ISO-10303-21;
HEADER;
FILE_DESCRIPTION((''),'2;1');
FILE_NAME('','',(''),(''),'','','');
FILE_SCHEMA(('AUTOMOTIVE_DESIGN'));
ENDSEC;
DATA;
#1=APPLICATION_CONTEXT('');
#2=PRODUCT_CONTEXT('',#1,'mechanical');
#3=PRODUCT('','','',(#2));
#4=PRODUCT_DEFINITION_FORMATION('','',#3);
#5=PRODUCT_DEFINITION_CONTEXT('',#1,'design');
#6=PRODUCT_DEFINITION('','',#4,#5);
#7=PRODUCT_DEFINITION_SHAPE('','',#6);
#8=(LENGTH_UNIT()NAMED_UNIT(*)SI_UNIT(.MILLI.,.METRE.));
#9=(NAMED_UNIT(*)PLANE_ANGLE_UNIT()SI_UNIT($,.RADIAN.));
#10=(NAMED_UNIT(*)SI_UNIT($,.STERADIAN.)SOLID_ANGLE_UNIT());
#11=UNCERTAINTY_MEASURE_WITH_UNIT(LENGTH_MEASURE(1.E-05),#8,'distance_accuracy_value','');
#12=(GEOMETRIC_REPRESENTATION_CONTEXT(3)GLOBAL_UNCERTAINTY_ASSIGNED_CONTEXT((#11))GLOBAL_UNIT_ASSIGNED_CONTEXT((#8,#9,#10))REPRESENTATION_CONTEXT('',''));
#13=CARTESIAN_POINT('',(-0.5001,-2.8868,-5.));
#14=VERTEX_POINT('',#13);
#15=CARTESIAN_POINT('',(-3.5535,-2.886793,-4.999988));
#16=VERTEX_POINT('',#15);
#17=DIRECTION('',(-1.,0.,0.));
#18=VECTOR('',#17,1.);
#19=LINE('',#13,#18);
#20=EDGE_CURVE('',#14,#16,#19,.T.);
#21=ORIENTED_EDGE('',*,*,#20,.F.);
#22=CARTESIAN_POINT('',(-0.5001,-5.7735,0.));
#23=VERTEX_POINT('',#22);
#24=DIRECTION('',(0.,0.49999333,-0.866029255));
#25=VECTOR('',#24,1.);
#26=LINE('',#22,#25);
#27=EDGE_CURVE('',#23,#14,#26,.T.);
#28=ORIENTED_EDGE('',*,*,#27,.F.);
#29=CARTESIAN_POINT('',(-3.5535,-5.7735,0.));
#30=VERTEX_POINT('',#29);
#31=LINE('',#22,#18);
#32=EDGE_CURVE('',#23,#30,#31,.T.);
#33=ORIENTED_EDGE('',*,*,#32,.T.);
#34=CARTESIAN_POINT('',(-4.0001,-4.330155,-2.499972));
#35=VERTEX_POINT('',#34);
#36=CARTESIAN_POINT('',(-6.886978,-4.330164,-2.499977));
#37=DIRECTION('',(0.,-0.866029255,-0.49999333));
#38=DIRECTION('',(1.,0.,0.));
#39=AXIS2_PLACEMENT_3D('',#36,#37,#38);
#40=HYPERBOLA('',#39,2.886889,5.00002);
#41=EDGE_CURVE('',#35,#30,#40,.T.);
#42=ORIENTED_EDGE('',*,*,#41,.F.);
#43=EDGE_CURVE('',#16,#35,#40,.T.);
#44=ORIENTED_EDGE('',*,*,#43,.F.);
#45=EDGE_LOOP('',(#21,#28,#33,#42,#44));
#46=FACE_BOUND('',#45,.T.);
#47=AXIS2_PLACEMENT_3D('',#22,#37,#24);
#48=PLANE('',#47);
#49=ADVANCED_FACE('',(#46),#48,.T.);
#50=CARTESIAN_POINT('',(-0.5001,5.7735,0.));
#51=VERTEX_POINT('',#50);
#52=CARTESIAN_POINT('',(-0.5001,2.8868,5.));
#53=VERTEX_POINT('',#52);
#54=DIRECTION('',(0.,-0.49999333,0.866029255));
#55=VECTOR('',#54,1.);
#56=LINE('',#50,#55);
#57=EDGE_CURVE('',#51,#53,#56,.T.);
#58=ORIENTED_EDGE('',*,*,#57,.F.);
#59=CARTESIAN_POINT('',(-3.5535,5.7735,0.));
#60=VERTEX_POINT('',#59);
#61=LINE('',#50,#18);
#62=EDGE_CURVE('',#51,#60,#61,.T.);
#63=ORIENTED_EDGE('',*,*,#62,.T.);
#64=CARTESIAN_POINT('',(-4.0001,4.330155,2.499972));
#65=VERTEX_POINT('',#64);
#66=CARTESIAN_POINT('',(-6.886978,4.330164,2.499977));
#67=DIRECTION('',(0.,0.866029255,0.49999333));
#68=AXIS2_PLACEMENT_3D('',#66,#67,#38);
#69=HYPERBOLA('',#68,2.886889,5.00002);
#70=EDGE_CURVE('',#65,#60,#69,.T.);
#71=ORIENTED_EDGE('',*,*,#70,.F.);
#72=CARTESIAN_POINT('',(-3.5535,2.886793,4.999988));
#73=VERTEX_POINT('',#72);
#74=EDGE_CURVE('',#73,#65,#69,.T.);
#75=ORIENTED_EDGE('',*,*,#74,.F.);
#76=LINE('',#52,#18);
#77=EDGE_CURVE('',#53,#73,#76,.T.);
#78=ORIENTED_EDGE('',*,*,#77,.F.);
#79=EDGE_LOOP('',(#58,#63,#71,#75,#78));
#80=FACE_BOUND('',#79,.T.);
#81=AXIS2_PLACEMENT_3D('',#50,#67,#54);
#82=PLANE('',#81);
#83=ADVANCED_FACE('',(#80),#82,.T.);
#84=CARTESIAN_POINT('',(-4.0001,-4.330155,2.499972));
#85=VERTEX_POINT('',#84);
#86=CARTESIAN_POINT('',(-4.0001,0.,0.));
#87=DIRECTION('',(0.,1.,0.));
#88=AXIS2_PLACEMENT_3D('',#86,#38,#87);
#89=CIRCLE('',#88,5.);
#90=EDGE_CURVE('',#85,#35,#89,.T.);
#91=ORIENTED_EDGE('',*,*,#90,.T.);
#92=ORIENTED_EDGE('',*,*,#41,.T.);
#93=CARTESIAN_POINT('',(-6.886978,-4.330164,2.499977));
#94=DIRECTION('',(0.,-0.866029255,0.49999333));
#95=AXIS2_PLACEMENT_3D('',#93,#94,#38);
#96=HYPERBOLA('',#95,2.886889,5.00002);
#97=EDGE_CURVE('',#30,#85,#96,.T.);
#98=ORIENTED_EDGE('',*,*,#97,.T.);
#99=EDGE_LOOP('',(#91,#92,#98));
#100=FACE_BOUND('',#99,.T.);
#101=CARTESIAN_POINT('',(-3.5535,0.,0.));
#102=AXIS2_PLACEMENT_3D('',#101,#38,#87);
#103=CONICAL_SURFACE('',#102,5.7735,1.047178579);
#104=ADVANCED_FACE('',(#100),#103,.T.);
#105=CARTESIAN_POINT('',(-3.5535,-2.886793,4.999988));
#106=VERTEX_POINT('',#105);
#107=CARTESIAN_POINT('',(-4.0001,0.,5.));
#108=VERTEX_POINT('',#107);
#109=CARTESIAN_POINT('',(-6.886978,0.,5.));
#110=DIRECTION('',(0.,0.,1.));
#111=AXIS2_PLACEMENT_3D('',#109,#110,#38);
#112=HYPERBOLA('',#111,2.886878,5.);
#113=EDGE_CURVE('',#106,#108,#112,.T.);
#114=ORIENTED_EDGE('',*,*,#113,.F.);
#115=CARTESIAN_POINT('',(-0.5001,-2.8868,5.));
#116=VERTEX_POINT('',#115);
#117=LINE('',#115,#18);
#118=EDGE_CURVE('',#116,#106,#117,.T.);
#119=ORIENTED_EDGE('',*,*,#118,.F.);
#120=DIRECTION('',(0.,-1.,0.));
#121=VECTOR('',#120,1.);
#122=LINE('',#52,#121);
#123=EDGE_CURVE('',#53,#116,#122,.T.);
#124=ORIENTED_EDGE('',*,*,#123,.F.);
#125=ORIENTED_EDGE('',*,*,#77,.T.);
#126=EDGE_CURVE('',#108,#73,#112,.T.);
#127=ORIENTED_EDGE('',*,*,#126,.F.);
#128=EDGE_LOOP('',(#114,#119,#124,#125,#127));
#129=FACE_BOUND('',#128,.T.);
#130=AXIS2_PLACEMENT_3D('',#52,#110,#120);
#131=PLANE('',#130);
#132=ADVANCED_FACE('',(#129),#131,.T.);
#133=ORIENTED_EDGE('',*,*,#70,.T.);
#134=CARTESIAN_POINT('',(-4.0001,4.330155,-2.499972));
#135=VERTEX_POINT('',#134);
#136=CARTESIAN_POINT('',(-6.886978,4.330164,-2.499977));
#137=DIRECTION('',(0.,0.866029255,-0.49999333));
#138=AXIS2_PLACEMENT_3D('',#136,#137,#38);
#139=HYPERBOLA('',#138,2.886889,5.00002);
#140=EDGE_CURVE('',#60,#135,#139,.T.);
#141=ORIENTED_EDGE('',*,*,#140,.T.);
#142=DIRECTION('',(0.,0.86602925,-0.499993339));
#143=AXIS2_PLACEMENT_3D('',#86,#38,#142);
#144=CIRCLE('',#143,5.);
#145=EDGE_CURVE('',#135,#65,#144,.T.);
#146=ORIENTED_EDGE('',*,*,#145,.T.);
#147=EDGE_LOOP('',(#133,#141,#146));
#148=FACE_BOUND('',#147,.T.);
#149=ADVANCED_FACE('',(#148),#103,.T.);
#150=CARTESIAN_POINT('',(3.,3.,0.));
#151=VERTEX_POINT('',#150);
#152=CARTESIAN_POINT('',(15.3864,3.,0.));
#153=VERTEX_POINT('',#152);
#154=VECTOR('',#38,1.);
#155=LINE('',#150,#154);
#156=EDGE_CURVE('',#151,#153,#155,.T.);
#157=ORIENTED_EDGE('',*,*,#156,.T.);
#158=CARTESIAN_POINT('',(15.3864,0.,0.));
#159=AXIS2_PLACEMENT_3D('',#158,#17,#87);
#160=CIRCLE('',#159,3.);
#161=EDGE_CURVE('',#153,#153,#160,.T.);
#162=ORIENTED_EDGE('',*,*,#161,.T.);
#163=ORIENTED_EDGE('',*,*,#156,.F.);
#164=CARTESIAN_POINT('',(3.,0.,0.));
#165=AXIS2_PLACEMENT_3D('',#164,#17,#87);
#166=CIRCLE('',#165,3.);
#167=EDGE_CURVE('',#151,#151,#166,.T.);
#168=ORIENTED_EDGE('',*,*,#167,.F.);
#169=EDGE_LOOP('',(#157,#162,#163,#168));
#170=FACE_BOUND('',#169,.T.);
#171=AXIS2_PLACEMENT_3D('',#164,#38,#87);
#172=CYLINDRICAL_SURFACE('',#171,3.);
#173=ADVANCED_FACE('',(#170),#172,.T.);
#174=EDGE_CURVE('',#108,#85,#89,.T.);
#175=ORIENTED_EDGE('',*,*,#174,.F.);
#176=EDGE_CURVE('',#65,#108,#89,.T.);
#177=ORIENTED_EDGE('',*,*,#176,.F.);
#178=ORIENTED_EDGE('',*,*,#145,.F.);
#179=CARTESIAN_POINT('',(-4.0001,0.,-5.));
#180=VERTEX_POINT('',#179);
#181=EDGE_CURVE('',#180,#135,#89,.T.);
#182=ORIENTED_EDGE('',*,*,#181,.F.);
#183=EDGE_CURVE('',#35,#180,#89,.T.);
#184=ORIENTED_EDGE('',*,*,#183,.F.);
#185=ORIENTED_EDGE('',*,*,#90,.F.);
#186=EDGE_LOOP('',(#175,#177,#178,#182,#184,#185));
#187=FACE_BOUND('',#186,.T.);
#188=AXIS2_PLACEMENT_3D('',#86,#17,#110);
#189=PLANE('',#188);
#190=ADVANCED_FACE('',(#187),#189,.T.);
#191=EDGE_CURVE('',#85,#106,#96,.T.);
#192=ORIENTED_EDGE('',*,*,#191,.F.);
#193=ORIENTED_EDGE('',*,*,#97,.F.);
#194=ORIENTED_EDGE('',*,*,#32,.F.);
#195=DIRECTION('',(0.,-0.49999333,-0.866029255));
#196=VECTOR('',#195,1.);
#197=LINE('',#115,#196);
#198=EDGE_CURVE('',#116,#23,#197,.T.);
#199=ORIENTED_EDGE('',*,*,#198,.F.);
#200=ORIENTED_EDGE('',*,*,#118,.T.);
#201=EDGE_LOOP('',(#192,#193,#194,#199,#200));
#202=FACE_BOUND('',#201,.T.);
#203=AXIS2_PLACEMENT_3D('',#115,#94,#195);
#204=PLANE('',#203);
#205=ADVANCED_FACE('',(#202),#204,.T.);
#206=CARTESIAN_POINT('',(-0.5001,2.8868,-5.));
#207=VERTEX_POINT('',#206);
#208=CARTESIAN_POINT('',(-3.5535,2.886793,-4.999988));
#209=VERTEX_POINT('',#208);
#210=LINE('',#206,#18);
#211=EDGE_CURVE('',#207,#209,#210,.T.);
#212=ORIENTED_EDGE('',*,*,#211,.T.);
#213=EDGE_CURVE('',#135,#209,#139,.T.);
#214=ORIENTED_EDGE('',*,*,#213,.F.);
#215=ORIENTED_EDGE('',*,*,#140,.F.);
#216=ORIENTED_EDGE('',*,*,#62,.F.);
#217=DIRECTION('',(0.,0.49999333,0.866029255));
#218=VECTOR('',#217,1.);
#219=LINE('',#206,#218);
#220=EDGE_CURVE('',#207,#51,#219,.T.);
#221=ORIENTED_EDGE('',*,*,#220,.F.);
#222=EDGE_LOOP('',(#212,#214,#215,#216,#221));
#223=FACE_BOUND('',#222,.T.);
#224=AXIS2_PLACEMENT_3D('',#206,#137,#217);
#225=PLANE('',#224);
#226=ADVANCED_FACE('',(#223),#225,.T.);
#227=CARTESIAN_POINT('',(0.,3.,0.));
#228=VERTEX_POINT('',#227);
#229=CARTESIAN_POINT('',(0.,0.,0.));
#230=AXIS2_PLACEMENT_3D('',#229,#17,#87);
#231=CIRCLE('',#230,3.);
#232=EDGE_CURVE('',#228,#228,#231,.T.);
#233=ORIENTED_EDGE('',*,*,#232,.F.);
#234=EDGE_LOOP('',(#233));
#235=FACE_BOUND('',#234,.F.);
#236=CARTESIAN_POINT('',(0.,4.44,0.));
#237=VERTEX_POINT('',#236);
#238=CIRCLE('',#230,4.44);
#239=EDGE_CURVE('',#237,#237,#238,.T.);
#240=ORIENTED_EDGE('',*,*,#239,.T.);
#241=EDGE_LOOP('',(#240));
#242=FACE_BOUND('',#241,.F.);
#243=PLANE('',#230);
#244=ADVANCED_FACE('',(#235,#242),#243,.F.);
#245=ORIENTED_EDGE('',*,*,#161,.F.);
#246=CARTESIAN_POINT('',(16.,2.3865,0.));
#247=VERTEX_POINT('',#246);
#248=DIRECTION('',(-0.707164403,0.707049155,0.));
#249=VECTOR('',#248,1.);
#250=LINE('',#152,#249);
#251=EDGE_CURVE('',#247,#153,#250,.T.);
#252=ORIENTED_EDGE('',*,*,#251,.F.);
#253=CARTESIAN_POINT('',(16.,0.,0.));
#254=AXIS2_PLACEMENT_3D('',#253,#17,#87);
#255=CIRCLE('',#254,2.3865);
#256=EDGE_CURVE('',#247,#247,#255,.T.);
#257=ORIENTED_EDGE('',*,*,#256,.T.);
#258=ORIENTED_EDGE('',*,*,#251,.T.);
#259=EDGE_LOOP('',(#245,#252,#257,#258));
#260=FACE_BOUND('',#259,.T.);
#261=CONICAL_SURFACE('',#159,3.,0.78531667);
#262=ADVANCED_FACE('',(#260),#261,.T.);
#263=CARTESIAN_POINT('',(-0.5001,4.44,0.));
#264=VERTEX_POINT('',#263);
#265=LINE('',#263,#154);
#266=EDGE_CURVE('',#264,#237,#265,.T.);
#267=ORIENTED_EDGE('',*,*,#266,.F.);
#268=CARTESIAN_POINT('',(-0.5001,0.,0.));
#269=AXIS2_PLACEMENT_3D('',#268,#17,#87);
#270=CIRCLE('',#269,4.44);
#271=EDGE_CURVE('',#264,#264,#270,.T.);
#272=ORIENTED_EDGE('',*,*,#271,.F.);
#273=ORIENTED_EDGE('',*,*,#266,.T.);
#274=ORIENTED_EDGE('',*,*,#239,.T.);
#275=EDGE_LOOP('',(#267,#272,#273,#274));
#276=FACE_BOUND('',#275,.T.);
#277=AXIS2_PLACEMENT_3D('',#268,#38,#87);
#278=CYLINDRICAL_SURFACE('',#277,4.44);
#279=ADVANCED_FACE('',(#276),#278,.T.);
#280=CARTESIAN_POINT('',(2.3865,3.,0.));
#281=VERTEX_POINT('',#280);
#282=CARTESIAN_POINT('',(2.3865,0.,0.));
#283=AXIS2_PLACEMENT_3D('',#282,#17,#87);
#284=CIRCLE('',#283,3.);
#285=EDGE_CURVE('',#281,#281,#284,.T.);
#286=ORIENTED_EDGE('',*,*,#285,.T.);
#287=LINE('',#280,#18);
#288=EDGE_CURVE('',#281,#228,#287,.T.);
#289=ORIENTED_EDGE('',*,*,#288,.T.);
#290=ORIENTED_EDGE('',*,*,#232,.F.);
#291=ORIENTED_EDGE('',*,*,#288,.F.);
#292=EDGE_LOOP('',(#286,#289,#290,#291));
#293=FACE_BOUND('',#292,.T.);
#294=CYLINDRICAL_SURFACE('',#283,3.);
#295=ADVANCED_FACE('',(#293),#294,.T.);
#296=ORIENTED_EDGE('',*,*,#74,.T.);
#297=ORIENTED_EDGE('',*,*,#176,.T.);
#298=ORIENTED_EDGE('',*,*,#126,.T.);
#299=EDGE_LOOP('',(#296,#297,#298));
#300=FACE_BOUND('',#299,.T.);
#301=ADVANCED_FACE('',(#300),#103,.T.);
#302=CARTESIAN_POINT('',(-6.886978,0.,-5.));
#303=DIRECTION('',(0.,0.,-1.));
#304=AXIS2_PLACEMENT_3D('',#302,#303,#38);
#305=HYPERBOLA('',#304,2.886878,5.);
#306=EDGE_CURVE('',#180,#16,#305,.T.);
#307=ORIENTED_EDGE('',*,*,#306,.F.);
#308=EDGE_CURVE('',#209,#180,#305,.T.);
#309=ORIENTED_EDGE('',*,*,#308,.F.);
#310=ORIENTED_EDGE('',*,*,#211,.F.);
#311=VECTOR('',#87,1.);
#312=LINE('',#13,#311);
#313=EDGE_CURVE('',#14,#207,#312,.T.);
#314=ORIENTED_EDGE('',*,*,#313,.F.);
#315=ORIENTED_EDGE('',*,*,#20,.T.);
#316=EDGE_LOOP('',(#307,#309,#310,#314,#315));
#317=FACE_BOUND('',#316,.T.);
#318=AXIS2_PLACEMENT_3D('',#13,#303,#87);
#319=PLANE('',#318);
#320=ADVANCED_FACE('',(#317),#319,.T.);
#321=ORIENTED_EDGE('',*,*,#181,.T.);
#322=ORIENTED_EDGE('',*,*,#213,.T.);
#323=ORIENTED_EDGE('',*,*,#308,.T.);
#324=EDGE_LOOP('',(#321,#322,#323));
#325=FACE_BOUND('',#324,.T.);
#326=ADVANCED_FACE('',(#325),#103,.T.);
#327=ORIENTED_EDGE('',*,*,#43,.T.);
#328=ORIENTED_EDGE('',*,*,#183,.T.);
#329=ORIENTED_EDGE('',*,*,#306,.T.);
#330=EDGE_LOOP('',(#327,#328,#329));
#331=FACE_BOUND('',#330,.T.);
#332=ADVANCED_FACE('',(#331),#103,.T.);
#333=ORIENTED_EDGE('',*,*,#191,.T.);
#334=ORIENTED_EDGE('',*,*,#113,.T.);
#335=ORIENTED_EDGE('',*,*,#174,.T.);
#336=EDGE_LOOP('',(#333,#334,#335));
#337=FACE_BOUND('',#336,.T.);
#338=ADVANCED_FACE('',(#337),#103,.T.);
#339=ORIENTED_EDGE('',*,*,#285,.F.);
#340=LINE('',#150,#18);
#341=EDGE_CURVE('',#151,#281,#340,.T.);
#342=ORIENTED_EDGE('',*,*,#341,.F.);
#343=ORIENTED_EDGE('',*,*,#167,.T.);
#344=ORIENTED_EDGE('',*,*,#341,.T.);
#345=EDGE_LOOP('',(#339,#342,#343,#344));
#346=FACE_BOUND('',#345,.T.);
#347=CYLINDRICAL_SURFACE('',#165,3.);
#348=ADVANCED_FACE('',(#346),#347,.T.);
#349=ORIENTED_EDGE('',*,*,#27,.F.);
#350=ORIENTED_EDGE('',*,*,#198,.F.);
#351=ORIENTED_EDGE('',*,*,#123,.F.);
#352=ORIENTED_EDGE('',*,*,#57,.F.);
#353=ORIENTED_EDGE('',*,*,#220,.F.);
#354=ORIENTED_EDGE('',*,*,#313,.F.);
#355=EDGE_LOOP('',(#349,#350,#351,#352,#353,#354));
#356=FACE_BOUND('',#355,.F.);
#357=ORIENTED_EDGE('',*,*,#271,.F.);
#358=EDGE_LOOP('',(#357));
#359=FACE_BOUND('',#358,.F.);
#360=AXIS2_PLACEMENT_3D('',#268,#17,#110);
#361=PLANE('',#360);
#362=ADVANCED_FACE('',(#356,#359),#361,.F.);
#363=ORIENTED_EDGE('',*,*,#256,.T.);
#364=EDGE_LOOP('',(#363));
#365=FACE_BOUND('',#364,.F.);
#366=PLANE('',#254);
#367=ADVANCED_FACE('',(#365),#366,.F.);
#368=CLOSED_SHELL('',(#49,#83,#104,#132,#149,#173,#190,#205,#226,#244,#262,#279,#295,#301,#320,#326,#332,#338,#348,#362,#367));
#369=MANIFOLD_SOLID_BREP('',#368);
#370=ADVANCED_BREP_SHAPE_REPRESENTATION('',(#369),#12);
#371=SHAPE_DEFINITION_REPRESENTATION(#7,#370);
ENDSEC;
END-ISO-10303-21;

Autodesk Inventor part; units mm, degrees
ref_plane "YZ Plane" through (0, 0, 0) normal (1, 0, 0) x (0, 1, 0)
ref_plane "XZ Plane" through (0, 0, 0) normal (0, 1, 0) x (-1, 0, 0)
sketch "Skizze1" plane through (0, 0, 0) normal (0, 0, 1) x (1, 0, 0)
  line L0 (0, 4.44) -> (0, 3)
  line L1 (3, 3) -> (16, 3)
  line L2 (16, 3) -> (16, 0)
  line L3 (16, 0) -> (-0.5001, 0)
  line L4 (-3.8001, 0) -> (19.3, 0) projected
  line L5 (-0.5001, 0) -> (-0.5001, 4.44)
  line L6 (-0.5001, 4.44) -> (0, 4.44)
  line L7 (3, 3) -> (2.3865, 3)
  line L8 (2.3865, 3) -> (0, 3)
  line L9 (0, -0.888) -> (0, 5.328) projected
  dimension "d0" = 16
  dimension "d1" = 13
  dimension "d2" = 6
  dimension "d9" = 0.5001
  dimension "d10" = 8.88
  dimension "d13" = 0.6136
  dimension "d14" = 6
revolve "Körper" add sketch "Skizze1" angle 360 about axis through (16, 0, 0) along (-1, 0, 0)
sketch "Skizze2" plane through (-0.5001, 0, 0) normal (-1, 0, 0) x (0, 0, 1)
  line L0 (0, 5.7735) -> (5, 2.8868)
  line L1 (5, 2.8868) -> (5, -2.8868)
  line L2 (5, -2.8868) -> (0, -5.7735)
  line L3 (0, -5.7735) -> (-5, -2.8868)
  line L4 (-5, -2.8868) -> (-5, 2.8868)
  line L5 (-5, 2.8868) -> (0, 5.7735)
  point P0 (0, 0)
  point P1 (0, 0)
  dimension "d11" = 10
extrude "Kopf" add sketch "Skizze2" along normal blind 3.5
sketch "Skizze4" plane through (0, 0, 0) normal (0, 0, 1) x (1, 0, 0)
  line L0 (-4.0001, 5) -> (-4.0001, 5.7735)
  line L1 (-4.0001, 5.7735) -> (-3.5535, 5.7735)
  line L2 (-3.5535, 5.7735) -> (-4.0001, 5)
  line L3 (-4.7001, 0) -> (0.1999, 0) projected
  line L4 (-0.5001, 5.7735) -> (-4.0001, 5.7735) projected
  line L5 (-4.0001, 2.8868) -> (-4.0001, 5.7735) projected
  dimension "d5" = 30
  dimension "d19" = 10
revolve "Fase1" cut sketch "Skizze4" angle 360 about axis through (-10, 0, 0) along (1, 0, 0)
thread "Gewinde" size "M6x1" class "6g" standard "ISO Metric profile" length 13
chamfer "Fase2" distance 0.6135 distance2 0.6136 1 edges at (16, -3, 0) measured on face at (16, -0.301, 1.1526)
ref_plane "Work Plane1" through (1.525, 0, 0) normal (0, 0, 1) x (1, 0, 0)
equation "\"d11\" = SW"
equation "\"d3\" = KOH - SD"
equation "\"d15\" = GEL"
equation "\"d6\" = -0.5 * SPD + 0.5 * GD"
equation "\"d0\" = NLG"
equation "\"d1\" = GEL"
equation "\"d2\" = GD"
equation "\"d10\" = SD2"
equation "\"d14\" = BDM"
equation "\"d5\" = ANG1"
equation "\"d19\" = SW0"
equation "\"NLG\" = 16"
equation "\"GD\" = NND"
equation "\"BDM\" = NND"
equation "\"KOH\" = 4"
equation "\"GEL\" = 13"
equation "\"SW\" = 10"
equation "\"SW0\" = SW"
equation "\"SPD\" = NND - 1.2269 * PTC"
equation "\"SD2\" = 8.88"
equation "\"SD\" = 0.5"
equation "\"ANG1\" = 30deg"
equation "\"GAL\" = 0.61345 * PTC"
equation "\"GUL\" = 0.61345 * PTC"
equation "\"RR\" = 0.25"
equation "\"GD1\" = THREADDIA - 1.2269 * PTC"
equation "\"THREADDIA\" = 6"
equation "\"SDH\" = SD2"
equation "\"SDHG\" = 3"
equation "\"TOA\" = 30deg"
equation "\"PTC\" = 1"
equation "\"NND\" = 6"
equation "\"E0\" = 11.55"
properties part number "ISO 4017 - M6 x 16" material "Edelstahl, 440C"
